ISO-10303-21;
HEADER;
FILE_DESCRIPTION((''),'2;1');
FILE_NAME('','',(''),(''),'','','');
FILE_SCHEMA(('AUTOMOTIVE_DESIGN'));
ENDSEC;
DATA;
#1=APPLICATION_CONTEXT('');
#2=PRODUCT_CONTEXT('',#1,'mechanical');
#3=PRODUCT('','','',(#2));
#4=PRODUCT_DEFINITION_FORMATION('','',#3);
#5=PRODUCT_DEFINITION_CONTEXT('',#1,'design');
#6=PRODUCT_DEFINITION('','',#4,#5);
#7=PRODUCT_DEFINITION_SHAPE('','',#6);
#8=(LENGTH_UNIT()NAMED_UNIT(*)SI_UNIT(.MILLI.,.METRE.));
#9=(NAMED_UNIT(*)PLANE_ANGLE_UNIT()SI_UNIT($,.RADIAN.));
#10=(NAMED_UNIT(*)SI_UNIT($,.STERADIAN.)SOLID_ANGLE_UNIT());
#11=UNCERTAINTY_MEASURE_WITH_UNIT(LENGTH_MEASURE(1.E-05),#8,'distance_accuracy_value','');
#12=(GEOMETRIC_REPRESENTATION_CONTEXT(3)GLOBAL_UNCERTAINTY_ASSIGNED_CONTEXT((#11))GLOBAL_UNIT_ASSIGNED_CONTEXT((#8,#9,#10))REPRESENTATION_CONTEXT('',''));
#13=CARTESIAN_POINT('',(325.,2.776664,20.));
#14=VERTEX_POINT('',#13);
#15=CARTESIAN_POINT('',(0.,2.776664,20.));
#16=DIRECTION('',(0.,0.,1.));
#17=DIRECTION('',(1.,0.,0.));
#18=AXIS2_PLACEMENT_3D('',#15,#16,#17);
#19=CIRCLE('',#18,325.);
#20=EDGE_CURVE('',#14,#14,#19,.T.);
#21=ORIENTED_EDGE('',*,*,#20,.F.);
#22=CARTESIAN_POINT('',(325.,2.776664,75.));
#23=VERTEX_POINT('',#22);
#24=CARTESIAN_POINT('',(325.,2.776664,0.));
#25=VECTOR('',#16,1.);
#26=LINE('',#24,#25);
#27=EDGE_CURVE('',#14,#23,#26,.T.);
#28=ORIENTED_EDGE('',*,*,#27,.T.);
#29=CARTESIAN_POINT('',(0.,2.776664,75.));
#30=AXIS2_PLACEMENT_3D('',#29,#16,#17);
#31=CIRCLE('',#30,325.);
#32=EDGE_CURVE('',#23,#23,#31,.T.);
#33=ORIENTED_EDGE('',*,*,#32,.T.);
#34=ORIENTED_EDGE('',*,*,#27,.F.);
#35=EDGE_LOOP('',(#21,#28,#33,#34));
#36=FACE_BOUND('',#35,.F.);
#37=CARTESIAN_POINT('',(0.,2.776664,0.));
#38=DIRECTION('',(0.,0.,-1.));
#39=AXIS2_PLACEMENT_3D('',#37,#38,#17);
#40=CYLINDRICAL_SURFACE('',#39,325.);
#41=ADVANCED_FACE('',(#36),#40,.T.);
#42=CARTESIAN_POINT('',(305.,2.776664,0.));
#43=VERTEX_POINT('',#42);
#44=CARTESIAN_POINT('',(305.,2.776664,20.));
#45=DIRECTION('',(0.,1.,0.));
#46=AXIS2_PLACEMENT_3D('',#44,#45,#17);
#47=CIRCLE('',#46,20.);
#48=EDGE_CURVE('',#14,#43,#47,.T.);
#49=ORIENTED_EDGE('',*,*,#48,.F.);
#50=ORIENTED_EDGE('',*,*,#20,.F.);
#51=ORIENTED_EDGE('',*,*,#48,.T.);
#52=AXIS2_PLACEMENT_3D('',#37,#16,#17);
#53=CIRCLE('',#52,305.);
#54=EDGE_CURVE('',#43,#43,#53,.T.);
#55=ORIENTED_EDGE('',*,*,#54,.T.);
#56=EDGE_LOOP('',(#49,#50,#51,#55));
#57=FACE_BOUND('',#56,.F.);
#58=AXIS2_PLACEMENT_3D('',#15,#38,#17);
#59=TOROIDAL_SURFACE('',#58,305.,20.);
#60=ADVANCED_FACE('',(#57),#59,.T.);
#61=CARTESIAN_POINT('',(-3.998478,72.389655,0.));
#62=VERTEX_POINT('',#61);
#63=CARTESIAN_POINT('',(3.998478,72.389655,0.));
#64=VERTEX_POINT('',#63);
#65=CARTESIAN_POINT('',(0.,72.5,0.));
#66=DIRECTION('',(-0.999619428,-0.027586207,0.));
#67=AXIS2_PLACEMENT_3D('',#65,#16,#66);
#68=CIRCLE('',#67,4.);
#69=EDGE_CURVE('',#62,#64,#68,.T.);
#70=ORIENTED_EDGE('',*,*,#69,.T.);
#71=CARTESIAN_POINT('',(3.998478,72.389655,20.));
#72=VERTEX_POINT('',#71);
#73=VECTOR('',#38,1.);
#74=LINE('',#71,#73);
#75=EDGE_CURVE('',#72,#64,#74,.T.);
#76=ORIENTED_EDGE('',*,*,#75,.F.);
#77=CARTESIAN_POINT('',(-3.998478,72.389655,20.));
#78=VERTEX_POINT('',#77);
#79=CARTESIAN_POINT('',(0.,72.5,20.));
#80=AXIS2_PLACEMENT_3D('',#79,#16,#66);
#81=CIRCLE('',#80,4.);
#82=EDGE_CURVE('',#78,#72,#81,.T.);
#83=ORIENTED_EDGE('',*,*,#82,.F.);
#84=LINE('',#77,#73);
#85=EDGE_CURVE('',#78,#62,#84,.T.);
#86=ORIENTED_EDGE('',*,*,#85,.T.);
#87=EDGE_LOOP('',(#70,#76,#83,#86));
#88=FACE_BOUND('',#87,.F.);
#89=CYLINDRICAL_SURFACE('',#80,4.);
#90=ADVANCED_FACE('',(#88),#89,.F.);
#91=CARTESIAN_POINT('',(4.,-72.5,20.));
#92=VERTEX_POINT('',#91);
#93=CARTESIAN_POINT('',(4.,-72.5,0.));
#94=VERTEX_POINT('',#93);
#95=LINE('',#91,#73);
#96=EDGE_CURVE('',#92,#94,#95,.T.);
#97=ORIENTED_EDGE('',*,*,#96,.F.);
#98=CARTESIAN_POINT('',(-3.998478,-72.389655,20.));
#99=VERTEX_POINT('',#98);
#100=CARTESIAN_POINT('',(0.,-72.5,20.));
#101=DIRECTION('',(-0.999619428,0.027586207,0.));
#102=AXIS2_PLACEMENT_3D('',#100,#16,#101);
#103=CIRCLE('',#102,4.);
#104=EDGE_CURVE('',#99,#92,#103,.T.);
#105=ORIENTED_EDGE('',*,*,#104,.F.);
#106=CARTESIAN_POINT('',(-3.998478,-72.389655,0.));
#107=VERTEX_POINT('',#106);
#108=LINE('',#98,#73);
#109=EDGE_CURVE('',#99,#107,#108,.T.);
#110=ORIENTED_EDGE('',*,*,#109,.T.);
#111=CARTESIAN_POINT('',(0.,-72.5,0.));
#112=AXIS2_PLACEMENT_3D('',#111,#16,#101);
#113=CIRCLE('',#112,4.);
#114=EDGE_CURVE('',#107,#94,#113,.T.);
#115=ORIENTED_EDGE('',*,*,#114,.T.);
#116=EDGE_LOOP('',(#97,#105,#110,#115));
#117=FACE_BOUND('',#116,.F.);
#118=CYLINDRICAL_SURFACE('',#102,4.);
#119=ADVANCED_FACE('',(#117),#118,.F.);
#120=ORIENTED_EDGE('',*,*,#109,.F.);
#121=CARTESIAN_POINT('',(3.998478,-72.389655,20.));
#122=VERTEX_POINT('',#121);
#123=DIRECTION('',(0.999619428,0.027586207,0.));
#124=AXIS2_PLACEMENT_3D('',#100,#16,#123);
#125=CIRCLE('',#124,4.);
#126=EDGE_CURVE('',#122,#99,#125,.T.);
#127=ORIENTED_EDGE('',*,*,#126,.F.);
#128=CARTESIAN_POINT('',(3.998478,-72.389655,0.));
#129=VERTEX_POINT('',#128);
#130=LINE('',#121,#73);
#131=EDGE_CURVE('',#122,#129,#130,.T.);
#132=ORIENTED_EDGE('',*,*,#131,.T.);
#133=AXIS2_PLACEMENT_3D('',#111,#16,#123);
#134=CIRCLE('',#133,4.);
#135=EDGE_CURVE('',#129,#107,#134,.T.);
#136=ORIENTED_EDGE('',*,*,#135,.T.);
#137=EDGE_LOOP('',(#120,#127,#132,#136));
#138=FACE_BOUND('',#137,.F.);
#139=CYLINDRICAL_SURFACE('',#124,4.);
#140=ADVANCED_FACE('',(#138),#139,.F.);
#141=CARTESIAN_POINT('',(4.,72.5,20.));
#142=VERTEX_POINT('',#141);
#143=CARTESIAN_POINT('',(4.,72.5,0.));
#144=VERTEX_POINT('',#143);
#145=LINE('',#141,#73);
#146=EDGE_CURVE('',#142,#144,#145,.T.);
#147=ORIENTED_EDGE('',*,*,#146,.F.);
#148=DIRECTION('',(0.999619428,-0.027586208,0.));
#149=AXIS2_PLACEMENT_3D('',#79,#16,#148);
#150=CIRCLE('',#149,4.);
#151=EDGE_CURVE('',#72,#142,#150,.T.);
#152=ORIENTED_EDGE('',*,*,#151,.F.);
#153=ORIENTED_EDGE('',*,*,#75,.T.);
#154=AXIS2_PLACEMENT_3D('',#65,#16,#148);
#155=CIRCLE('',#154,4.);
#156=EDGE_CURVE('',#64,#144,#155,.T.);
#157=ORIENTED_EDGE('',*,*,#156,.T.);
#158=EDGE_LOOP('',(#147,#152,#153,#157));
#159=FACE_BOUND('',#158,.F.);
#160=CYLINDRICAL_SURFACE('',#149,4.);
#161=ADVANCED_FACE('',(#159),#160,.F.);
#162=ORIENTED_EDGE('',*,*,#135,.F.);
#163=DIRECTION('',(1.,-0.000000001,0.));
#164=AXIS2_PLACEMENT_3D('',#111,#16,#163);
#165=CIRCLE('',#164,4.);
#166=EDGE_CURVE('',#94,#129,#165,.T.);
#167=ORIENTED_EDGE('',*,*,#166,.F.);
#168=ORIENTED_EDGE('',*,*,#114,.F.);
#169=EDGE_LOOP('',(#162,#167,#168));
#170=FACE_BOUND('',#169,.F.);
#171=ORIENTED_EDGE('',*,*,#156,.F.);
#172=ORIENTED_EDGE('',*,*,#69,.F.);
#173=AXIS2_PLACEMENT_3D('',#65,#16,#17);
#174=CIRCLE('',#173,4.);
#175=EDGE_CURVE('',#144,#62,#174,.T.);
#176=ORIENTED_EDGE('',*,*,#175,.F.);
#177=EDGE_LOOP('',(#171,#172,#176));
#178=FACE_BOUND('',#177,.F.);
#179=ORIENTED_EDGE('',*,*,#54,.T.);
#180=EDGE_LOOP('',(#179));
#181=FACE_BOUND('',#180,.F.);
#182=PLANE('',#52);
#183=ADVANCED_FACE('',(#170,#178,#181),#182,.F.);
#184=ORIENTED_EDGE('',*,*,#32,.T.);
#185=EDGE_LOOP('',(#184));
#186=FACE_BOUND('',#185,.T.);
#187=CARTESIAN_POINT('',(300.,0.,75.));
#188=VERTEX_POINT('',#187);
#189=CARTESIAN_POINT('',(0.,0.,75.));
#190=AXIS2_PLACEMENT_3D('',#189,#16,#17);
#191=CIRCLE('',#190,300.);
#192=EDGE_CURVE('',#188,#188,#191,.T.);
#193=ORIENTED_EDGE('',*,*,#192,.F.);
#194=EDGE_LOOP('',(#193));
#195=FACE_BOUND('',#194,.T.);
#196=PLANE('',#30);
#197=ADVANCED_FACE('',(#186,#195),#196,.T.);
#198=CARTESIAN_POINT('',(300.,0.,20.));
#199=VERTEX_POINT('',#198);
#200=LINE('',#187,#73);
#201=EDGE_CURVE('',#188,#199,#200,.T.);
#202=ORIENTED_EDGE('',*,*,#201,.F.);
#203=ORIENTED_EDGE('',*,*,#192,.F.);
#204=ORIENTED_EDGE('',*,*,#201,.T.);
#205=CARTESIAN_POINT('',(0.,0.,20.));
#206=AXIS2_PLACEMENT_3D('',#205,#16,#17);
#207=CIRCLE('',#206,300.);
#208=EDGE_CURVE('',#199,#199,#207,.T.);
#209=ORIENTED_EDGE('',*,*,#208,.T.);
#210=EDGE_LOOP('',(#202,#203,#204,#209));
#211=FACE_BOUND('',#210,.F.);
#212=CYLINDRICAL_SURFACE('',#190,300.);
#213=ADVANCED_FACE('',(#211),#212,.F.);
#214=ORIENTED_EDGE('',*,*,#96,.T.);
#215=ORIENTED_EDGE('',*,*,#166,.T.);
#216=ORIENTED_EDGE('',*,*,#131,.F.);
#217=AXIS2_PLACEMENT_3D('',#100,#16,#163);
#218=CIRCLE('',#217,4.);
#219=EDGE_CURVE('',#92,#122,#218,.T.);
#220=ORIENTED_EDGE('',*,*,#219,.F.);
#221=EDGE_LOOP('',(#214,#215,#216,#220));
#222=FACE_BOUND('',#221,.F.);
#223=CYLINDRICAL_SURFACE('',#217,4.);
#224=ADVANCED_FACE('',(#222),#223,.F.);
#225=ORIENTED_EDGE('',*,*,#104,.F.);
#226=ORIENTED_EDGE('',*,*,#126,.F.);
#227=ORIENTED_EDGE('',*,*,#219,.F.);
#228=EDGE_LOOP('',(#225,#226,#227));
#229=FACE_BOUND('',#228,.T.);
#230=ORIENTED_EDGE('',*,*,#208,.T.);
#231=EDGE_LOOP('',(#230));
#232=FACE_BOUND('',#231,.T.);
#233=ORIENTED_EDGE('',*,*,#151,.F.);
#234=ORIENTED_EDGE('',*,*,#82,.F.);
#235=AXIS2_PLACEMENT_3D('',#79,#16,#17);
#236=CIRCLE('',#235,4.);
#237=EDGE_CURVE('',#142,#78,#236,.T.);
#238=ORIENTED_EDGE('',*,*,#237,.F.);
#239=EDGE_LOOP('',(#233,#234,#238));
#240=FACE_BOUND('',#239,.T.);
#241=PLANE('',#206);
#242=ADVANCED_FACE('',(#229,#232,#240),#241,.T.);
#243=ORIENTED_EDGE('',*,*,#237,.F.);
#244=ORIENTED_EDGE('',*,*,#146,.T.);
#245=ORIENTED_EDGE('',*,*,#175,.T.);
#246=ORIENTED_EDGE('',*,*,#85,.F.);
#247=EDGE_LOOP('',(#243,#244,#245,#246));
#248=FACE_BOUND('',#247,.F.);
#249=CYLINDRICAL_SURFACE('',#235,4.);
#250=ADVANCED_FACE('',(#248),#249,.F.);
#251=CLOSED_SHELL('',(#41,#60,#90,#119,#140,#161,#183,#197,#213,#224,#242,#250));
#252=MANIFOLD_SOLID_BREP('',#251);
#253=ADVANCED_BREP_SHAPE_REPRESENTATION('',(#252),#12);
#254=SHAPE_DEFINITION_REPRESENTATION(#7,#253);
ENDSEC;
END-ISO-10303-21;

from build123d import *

# Parameters (mm, degrees)
F0_R     = 325
F1_DEPTH = 75
F2_R     = 300
F3_DEPTH = 55
F4_R     = 20
F6_DEPTH = 25


with BuildPart() as f1:
    # F0 (on Top) → F1 (new body)
    with BuildSketch(Plane.XY):
        with Locations((0, 2.7766637504)):
            Circle(F0_R)
    extrude(amount=F1_DEPTH)

    # F2 (on face) → F3 (cut)
    with BuildSketch(Plane.XY.offset(75)):
        Circle(F2_R)
    extrude(amount=-F3_DEPTH, mode=Mode.SUBTRACT)

    # F4
    f4_edges = [f1.edges().sort_by_distance(p)[0] for p in [
        (-325, 2.776664, 0),
    ]]
    fillet(f4_edges, radius=F4_R)

    # F5 (on face) → F6 (cut)
    with BuildSketch(Plane.XY.offset(20)):
        with BuildLine():
            ThreePointArc((-3.9984777127, 72.3896551724), (0, 68.5), (3.9984777127, 72.3896551724))
            ThreePointArc((3.9984777127, 72.3896551724), (0, 72.5), (-3.9984777127, 72.3896551724))
        make_face()
        with BuildLine():
            ThreePointArc((-3.9984777127, 72.3896551724), (0, 72.5), (3.9984777127, 72.3896551724))
            ThreePointArc((3.9984777127, 72.3896551724), (3.9996194101, 72.4448223362), (4, 72.5))
            ThreePointArc((4, 72.5), (-0.0551776638, 76.4996194101), (-3.9984777127, 72.3896551724))
        make_face()
        with BuildLine():
            ThreePointArc((4, -72.5), (3.9996194101, -72.4448223362), (3.9984777127, -72.3896551724))
            ThreePointArc((3.9984777127, -72.3896551724), (0, -72.5), (-3.9984777127, -72.3896551724))
            ThreePointArc((-3.9984777127, -72.3896551724), (-0.0551776638, -76.4996194101), (4, -72.5))
        make_face()
        with BuildLine():
            ThreePointArc((-3.9984777127, -72.3896551724), (0, -72.5), (3.9984777127, -72.3896551724))
            ThreePointArc((3.9984777127, -72.3896551724), (0, -68.5), (-3.9984777127, -72.3896551724))
        make_face()
    extrude(amount=-F6_DEPTH, mode=Mode.SUBTRACT)


solid = f1.part
